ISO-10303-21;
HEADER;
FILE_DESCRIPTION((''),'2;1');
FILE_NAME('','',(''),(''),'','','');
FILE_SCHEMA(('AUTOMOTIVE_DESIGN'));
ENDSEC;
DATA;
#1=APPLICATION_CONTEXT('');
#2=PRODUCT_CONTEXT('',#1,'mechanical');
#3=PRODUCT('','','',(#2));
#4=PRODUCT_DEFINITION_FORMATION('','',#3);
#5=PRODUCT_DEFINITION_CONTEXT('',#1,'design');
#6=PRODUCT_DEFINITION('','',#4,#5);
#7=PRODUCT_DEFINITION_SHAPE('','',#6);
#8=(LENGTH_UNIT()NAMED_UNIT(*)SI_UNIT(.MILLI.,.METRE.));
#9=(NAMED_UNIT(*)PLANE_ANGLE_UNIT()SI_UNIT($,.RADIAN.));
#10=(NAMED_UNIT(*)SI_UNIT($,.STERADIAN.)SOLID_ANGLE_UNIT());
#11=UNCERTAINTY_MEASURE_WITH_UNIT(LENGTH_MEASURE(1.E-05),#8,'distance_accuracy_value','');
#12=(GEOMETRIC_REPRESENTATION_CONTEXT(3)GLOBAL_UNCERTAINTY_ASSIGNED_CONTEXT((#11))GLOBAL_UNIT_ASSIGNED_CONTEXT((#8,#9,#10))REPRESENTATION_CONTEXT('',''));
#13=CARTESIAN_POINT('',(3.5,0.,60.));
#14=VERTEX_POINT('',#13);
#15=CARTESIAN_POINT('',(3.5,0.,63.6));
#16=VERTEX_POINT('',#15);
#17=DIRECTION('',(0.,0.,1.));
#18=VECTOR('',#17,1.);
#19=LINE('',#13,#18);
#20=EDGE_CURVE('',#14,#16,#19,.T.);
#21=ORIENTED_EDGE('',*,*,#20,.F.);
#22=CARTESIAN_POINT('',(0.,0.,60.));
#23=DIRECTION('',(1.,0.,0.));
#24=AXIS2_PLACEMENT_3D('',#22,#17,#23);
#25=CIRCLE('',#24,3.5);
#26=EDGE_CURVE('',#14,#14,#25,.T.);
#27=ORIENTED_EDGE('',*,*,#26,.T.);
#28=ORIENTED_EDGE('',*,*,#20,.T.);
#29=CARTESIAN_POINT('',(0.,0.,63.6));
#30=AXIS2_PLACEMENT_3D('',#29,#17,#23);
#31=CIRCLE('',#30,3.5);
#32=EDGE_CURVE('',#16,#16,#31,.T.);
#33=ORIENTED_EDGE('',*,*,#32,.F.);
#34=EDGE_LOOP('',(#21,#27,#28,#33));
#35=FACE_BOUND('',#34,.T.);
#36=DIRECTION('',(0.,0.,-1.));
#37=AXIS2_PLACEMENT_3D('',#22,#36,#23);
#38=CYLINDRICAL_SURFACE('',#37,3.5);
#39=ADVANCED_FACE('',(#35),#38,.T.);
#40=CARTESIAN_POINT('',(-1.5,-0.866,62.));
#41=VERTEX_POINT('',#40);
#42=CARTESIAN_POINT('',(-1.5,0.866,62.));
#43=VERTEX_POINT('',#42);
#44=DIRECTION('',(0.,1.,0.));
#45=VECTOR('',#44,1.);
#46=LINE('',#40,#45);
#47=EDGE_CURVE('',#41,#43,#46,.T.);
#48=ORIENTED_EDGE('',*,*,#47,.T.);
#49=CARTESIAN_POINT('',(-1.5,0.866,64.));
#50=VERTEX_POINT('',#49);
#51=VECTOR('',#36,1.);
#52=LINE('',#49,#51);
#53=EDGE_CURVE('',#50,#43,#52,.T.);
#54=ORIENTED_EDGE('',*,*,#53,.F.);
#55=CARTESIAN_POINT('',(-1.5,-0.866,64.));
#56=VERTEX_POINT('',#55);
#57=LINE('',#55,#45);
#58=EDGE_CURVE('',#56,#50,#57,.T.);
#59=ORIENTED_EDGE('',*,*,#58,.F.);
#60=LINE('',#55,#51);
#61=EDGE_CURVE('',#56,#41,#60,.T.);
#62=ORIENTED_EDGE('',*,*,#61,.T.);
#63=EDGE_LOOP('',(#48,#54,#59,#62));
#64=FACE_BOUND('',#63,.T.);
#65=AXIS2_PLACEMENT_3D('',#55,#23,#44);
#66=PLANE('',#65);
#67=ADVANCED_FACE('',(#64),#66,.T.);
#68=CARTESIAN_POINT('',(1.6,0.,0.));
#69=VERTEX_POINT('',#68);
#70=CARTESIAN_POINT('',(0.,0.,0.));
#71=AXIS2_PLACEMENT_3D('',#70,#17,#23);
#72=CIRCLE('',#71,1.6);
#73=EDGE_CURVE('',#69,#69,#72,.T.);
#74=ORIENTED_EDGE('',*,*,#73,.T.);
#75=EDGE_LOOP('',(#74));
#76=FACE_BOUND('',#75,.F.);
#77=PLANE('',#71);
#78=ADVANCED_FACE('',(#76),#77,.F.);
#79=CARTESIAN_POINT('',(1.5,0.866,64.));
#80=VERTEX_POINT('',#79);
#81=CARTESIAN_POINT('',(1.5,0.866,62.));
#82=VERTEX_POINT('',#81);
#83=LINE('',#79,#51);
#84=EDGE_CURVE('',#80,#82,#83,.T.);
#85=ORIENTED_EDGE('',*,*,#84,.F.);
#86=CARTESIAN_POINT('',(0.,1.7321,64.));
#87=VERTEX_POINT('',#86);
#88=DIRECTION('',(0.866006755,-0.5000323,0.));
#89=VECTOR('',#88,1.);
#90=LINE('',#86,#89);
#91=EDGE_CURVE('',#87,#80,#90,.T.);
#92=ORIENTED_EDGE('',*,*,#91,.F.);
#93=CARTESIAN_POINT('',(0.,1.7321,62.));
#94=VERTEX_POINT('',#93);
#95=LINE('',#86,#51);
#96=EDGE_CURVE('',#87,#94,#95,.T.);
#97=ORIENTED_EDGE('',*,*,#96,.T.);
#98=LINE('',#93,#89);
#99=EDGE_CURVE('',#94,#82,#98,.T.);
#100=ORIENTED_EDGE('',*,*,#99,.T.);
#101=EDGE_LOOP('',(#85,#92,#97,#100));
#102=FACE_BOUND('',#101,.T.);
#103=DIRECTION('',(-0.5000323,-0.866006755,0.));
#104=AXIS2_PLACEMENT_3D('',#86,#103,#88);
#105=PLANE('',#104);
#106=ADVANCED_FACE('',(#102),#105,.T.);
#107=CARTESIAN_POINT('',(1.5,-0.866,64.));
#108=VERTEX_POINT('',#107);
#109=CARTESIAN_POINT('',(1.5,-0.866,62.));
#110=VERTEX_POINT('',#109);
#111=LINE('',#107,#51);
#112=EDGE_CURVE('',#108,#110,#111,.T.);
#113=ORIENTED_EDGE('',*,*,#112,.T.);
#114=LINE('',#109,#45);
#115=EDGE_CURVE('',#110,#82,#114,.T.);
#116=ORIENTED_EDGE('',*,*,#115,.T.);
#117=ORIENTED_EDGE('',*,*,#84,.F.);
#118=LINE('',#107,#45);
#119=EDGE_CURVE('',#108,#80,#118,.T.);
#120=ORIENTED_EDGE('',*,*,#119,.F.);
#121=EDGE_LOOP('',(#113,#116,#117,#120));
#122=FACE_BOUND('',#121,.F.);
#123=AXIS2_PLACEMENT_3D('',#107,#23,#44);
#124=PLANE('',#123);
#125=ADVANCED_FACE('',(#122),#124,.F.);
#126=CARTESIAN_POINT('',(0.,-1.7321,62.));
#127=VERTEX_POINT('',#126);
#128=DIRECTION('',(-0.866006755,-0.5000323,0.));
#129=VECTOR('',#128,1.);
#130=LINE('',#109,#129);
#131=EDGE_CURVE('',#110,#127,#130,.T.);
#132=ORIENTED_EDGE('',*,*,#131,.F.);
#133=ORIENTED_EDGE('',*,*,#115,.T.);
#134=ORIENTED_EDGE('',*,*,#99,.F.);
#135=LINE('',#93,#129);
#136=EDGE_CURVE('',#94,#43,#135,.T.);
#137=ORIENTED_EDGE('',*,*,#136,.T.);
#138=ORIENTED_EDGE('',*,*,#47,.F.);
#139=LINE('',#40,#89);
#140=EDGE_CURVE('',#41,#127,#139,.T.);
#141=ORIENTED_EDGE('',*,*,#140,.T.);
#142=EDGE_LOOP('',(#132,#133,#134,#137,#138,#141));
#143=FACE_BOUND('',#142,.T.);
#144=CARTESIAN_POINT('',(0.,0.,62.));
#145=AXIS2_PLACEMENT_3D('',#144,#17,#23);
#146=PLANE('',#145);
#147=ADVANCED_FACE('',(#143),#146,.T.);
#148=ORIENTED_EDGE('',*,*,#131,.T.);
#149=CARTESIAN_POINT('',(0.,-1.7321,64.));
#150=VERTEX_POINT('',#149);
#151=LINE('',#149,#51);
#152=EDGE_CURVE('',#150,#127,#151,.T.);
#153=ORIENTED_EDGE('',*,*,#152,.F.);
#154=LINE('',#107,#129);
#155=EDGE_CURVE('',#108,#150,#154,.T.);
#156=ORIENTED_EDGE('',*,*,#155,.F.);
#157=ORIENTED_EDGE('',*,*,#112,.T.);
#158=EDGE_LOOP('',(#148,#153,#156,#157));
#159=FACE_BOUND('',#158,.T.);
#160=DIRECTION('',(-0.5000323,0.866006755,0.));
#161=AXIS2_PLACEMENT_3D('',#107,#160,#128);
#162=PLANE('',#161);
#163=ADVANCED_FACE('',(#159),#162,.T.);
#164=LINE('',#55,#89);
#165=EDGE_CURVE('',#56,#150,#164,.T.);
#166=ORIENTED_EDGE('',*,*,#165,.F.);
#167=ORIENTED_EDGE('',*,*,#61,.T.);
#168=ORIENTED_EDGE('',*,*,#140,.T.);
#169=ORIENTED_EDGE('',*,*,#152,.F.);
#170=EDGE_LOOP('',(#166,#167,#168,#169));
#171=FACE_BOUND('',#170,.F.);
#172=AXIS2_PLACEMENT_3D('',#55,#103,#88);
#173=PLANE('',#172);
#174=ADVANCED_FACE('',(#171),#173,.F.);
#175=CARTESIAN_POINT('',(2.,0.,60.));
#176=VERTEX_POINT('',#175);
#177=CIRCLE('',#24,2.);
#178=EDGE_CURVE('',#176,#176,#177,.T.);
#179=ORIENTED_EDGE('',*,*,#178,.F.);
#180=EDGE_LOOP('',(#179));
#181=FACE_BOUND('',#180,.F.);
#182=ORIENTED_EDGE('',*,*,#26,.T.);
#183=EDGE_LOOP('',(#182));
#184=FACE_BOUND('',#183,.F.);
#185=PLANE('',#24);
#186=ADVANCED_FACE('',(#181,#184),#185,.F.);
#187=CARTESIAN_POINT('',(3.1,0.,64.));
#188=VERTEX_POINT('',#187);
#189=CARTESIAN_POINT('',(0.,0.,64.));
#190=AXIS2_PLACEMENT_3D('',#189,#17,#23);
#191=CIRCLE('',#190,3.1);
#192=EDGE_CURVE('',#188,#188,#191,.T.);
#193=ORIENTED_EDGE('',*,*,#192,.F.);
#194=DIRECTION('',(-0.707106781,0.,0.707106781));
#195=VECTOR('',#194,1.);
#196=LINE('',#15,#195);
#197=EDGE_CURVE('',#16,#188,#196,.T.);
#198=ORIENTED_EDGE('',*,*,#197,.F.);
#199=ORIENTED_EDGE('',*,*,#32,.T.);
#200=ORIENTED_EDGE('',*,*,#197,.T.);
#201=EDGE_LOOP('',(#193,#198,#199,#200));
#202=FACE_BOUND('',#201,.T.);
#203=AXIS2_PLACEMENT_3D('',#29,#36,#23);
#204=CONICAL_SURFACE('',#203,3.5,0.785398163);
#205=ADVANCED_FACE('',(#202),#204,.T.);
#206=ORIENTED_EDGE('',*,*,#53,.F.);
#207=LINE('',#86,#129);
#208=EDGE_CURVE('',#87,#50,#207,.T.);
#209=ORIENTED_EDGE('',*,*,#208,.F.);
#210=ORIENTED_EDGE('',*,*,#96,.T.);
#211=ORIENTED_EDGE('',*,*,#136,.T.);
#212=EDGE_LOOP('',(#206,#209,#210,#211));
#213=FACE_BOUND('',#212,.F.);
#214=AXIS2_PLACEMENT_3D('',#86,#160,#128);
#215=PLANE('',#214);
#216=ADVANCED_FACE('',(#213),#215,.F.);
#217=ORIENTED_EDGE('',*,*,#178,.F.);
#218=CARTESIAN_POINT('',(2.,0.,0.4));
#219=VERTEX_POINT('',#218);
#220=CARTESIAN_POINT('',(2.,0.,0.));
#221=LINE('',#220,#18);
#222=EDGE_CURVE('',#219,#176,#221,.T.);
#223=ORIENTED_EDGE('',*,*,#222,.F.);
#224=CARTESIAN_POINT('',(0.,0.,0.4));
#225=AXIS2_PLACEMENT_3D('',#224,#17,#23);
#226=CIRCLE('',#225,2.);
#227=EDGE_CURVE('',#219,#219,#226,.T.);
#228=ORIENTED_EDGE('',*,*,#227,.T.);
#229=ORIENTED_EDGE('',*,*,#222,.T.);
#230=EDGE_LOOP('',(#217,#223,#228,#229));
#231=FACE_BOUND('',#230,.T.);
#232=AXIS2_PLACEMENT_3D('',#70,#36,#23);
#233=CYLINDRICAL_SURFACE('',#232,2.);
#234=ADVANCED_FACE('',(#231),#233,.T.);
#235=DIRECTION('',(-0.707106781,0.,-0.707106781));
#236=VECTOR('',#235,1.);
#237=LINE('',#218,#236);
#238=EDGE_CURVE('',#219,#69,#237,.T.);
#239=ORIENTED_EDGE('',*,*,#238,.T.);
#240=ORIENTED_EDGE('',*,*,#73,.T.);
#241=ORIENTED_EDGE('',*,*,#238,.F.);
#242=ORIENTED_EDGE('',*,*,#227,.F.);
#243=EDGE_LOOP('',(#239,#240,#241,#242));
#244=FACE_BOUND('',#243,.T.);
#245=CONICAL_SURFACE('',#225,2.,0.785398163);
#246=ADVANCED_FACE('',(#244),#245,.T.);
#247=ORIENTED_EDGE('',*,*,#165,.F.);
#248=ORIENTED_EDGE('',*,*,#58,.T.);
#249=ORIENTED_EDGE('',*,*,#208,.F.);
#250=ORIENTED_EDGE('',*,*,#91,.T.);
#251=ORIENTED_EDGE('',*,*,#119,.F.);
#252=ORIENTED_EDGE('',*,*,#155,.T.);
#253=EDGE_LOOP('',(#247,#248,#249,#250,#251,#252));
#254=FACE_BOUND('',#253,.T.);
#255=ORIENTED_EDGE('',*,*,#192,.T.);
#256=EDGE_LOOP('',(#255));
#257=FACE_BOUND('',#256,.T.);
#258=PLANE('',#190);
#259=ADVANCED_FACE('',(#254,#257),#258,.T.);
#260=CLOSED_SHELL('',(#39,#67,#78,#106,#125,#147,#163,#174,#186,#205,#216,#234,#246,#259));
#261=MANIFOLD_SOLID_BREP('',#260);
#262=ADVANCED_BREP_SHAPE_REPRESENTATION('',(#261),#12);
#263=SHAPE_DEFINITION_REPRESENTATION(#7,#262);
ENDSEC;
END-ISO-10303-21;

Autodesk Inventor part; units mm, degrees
ref_plane "YZ Plane" through (0, 0, 0) normal (1, 0, 0) x (0, 1, 0)
ref_plane "XZ Plane" through (0, 0, 0) normal (0, 1, 0) x (-1, 0, 0)
ref_plane "XY Plane" through (0, 0, 0) normal (0, 0, 1) x (1, 0, 0)
sketch "Sketch1" plane through (0, 0, 0) normal (0, 0, 1) x (1, 0, 0)
  circle A0 centre (0, 0) radius 2
  dimension "Diameter" = 4
extrude "Extrusion1" add sketch "Sketch1" along normal blind 60
sketch "Sketch2" plane through (0, 0, 60) normal (0, 0, 1) x (1, 0, 0)
  circle A0 centre (0, 0) radius 2 projected
  circle A1 centre (0, 0) radius 3.5
  dimension "Head_Diameter" = 7
extrude "Extrusion2" add sketch "Sketch2" along normal blind 4 contours A0 | A1
sketch "Sketch3" plane through (0, 0, 64) normal (0, 0, 1) x (1, 0, 0)
  circle A0 centre (0, 0) radius 3.5 projected
  circle A1 centre (0, 0) radius 1.7321 construction
  line L0 (0, 1.7321) -> (1.5, 0.866)
  line L1 (1.5, -0.866) -> (1.5, 0.866)
  line L2 (0, 1.7321) -> (-1.5, 0.866)
  line L3 (-1.5, -0.866) -> (-1.5, 0.866)
  line L4 (-1.5, -0.866) -> (0, -1.7321)
  line L5 (1.5, -0.866) -> (0, -1.7321)
  dimension "Hex_Width" = 3
extrude "Extrusion3" cut sketch "Sketch3" against normal blind 2 contours L0 L1 L5 L4 L3 L2
thread "Thread1" size "M4x0.7" class "4g6g" standard "ANSI Metric M Profile" length 20
chamfer "Chamfer1" distance 0.4 angle 45 2 edges at (-3.5, 0, 64) (-2, 0, 0)
equation "\"d9\" = ThreadLength"
equation "\"d12\" = Chamfer"
equation "\"ThreadLength\" = 20"
equation "\"Chamfer\" = 0.4"
properties part number "SCREW, SOCKET HD, P, 12_9, M4X0_7X60" material "Steel, MS"
